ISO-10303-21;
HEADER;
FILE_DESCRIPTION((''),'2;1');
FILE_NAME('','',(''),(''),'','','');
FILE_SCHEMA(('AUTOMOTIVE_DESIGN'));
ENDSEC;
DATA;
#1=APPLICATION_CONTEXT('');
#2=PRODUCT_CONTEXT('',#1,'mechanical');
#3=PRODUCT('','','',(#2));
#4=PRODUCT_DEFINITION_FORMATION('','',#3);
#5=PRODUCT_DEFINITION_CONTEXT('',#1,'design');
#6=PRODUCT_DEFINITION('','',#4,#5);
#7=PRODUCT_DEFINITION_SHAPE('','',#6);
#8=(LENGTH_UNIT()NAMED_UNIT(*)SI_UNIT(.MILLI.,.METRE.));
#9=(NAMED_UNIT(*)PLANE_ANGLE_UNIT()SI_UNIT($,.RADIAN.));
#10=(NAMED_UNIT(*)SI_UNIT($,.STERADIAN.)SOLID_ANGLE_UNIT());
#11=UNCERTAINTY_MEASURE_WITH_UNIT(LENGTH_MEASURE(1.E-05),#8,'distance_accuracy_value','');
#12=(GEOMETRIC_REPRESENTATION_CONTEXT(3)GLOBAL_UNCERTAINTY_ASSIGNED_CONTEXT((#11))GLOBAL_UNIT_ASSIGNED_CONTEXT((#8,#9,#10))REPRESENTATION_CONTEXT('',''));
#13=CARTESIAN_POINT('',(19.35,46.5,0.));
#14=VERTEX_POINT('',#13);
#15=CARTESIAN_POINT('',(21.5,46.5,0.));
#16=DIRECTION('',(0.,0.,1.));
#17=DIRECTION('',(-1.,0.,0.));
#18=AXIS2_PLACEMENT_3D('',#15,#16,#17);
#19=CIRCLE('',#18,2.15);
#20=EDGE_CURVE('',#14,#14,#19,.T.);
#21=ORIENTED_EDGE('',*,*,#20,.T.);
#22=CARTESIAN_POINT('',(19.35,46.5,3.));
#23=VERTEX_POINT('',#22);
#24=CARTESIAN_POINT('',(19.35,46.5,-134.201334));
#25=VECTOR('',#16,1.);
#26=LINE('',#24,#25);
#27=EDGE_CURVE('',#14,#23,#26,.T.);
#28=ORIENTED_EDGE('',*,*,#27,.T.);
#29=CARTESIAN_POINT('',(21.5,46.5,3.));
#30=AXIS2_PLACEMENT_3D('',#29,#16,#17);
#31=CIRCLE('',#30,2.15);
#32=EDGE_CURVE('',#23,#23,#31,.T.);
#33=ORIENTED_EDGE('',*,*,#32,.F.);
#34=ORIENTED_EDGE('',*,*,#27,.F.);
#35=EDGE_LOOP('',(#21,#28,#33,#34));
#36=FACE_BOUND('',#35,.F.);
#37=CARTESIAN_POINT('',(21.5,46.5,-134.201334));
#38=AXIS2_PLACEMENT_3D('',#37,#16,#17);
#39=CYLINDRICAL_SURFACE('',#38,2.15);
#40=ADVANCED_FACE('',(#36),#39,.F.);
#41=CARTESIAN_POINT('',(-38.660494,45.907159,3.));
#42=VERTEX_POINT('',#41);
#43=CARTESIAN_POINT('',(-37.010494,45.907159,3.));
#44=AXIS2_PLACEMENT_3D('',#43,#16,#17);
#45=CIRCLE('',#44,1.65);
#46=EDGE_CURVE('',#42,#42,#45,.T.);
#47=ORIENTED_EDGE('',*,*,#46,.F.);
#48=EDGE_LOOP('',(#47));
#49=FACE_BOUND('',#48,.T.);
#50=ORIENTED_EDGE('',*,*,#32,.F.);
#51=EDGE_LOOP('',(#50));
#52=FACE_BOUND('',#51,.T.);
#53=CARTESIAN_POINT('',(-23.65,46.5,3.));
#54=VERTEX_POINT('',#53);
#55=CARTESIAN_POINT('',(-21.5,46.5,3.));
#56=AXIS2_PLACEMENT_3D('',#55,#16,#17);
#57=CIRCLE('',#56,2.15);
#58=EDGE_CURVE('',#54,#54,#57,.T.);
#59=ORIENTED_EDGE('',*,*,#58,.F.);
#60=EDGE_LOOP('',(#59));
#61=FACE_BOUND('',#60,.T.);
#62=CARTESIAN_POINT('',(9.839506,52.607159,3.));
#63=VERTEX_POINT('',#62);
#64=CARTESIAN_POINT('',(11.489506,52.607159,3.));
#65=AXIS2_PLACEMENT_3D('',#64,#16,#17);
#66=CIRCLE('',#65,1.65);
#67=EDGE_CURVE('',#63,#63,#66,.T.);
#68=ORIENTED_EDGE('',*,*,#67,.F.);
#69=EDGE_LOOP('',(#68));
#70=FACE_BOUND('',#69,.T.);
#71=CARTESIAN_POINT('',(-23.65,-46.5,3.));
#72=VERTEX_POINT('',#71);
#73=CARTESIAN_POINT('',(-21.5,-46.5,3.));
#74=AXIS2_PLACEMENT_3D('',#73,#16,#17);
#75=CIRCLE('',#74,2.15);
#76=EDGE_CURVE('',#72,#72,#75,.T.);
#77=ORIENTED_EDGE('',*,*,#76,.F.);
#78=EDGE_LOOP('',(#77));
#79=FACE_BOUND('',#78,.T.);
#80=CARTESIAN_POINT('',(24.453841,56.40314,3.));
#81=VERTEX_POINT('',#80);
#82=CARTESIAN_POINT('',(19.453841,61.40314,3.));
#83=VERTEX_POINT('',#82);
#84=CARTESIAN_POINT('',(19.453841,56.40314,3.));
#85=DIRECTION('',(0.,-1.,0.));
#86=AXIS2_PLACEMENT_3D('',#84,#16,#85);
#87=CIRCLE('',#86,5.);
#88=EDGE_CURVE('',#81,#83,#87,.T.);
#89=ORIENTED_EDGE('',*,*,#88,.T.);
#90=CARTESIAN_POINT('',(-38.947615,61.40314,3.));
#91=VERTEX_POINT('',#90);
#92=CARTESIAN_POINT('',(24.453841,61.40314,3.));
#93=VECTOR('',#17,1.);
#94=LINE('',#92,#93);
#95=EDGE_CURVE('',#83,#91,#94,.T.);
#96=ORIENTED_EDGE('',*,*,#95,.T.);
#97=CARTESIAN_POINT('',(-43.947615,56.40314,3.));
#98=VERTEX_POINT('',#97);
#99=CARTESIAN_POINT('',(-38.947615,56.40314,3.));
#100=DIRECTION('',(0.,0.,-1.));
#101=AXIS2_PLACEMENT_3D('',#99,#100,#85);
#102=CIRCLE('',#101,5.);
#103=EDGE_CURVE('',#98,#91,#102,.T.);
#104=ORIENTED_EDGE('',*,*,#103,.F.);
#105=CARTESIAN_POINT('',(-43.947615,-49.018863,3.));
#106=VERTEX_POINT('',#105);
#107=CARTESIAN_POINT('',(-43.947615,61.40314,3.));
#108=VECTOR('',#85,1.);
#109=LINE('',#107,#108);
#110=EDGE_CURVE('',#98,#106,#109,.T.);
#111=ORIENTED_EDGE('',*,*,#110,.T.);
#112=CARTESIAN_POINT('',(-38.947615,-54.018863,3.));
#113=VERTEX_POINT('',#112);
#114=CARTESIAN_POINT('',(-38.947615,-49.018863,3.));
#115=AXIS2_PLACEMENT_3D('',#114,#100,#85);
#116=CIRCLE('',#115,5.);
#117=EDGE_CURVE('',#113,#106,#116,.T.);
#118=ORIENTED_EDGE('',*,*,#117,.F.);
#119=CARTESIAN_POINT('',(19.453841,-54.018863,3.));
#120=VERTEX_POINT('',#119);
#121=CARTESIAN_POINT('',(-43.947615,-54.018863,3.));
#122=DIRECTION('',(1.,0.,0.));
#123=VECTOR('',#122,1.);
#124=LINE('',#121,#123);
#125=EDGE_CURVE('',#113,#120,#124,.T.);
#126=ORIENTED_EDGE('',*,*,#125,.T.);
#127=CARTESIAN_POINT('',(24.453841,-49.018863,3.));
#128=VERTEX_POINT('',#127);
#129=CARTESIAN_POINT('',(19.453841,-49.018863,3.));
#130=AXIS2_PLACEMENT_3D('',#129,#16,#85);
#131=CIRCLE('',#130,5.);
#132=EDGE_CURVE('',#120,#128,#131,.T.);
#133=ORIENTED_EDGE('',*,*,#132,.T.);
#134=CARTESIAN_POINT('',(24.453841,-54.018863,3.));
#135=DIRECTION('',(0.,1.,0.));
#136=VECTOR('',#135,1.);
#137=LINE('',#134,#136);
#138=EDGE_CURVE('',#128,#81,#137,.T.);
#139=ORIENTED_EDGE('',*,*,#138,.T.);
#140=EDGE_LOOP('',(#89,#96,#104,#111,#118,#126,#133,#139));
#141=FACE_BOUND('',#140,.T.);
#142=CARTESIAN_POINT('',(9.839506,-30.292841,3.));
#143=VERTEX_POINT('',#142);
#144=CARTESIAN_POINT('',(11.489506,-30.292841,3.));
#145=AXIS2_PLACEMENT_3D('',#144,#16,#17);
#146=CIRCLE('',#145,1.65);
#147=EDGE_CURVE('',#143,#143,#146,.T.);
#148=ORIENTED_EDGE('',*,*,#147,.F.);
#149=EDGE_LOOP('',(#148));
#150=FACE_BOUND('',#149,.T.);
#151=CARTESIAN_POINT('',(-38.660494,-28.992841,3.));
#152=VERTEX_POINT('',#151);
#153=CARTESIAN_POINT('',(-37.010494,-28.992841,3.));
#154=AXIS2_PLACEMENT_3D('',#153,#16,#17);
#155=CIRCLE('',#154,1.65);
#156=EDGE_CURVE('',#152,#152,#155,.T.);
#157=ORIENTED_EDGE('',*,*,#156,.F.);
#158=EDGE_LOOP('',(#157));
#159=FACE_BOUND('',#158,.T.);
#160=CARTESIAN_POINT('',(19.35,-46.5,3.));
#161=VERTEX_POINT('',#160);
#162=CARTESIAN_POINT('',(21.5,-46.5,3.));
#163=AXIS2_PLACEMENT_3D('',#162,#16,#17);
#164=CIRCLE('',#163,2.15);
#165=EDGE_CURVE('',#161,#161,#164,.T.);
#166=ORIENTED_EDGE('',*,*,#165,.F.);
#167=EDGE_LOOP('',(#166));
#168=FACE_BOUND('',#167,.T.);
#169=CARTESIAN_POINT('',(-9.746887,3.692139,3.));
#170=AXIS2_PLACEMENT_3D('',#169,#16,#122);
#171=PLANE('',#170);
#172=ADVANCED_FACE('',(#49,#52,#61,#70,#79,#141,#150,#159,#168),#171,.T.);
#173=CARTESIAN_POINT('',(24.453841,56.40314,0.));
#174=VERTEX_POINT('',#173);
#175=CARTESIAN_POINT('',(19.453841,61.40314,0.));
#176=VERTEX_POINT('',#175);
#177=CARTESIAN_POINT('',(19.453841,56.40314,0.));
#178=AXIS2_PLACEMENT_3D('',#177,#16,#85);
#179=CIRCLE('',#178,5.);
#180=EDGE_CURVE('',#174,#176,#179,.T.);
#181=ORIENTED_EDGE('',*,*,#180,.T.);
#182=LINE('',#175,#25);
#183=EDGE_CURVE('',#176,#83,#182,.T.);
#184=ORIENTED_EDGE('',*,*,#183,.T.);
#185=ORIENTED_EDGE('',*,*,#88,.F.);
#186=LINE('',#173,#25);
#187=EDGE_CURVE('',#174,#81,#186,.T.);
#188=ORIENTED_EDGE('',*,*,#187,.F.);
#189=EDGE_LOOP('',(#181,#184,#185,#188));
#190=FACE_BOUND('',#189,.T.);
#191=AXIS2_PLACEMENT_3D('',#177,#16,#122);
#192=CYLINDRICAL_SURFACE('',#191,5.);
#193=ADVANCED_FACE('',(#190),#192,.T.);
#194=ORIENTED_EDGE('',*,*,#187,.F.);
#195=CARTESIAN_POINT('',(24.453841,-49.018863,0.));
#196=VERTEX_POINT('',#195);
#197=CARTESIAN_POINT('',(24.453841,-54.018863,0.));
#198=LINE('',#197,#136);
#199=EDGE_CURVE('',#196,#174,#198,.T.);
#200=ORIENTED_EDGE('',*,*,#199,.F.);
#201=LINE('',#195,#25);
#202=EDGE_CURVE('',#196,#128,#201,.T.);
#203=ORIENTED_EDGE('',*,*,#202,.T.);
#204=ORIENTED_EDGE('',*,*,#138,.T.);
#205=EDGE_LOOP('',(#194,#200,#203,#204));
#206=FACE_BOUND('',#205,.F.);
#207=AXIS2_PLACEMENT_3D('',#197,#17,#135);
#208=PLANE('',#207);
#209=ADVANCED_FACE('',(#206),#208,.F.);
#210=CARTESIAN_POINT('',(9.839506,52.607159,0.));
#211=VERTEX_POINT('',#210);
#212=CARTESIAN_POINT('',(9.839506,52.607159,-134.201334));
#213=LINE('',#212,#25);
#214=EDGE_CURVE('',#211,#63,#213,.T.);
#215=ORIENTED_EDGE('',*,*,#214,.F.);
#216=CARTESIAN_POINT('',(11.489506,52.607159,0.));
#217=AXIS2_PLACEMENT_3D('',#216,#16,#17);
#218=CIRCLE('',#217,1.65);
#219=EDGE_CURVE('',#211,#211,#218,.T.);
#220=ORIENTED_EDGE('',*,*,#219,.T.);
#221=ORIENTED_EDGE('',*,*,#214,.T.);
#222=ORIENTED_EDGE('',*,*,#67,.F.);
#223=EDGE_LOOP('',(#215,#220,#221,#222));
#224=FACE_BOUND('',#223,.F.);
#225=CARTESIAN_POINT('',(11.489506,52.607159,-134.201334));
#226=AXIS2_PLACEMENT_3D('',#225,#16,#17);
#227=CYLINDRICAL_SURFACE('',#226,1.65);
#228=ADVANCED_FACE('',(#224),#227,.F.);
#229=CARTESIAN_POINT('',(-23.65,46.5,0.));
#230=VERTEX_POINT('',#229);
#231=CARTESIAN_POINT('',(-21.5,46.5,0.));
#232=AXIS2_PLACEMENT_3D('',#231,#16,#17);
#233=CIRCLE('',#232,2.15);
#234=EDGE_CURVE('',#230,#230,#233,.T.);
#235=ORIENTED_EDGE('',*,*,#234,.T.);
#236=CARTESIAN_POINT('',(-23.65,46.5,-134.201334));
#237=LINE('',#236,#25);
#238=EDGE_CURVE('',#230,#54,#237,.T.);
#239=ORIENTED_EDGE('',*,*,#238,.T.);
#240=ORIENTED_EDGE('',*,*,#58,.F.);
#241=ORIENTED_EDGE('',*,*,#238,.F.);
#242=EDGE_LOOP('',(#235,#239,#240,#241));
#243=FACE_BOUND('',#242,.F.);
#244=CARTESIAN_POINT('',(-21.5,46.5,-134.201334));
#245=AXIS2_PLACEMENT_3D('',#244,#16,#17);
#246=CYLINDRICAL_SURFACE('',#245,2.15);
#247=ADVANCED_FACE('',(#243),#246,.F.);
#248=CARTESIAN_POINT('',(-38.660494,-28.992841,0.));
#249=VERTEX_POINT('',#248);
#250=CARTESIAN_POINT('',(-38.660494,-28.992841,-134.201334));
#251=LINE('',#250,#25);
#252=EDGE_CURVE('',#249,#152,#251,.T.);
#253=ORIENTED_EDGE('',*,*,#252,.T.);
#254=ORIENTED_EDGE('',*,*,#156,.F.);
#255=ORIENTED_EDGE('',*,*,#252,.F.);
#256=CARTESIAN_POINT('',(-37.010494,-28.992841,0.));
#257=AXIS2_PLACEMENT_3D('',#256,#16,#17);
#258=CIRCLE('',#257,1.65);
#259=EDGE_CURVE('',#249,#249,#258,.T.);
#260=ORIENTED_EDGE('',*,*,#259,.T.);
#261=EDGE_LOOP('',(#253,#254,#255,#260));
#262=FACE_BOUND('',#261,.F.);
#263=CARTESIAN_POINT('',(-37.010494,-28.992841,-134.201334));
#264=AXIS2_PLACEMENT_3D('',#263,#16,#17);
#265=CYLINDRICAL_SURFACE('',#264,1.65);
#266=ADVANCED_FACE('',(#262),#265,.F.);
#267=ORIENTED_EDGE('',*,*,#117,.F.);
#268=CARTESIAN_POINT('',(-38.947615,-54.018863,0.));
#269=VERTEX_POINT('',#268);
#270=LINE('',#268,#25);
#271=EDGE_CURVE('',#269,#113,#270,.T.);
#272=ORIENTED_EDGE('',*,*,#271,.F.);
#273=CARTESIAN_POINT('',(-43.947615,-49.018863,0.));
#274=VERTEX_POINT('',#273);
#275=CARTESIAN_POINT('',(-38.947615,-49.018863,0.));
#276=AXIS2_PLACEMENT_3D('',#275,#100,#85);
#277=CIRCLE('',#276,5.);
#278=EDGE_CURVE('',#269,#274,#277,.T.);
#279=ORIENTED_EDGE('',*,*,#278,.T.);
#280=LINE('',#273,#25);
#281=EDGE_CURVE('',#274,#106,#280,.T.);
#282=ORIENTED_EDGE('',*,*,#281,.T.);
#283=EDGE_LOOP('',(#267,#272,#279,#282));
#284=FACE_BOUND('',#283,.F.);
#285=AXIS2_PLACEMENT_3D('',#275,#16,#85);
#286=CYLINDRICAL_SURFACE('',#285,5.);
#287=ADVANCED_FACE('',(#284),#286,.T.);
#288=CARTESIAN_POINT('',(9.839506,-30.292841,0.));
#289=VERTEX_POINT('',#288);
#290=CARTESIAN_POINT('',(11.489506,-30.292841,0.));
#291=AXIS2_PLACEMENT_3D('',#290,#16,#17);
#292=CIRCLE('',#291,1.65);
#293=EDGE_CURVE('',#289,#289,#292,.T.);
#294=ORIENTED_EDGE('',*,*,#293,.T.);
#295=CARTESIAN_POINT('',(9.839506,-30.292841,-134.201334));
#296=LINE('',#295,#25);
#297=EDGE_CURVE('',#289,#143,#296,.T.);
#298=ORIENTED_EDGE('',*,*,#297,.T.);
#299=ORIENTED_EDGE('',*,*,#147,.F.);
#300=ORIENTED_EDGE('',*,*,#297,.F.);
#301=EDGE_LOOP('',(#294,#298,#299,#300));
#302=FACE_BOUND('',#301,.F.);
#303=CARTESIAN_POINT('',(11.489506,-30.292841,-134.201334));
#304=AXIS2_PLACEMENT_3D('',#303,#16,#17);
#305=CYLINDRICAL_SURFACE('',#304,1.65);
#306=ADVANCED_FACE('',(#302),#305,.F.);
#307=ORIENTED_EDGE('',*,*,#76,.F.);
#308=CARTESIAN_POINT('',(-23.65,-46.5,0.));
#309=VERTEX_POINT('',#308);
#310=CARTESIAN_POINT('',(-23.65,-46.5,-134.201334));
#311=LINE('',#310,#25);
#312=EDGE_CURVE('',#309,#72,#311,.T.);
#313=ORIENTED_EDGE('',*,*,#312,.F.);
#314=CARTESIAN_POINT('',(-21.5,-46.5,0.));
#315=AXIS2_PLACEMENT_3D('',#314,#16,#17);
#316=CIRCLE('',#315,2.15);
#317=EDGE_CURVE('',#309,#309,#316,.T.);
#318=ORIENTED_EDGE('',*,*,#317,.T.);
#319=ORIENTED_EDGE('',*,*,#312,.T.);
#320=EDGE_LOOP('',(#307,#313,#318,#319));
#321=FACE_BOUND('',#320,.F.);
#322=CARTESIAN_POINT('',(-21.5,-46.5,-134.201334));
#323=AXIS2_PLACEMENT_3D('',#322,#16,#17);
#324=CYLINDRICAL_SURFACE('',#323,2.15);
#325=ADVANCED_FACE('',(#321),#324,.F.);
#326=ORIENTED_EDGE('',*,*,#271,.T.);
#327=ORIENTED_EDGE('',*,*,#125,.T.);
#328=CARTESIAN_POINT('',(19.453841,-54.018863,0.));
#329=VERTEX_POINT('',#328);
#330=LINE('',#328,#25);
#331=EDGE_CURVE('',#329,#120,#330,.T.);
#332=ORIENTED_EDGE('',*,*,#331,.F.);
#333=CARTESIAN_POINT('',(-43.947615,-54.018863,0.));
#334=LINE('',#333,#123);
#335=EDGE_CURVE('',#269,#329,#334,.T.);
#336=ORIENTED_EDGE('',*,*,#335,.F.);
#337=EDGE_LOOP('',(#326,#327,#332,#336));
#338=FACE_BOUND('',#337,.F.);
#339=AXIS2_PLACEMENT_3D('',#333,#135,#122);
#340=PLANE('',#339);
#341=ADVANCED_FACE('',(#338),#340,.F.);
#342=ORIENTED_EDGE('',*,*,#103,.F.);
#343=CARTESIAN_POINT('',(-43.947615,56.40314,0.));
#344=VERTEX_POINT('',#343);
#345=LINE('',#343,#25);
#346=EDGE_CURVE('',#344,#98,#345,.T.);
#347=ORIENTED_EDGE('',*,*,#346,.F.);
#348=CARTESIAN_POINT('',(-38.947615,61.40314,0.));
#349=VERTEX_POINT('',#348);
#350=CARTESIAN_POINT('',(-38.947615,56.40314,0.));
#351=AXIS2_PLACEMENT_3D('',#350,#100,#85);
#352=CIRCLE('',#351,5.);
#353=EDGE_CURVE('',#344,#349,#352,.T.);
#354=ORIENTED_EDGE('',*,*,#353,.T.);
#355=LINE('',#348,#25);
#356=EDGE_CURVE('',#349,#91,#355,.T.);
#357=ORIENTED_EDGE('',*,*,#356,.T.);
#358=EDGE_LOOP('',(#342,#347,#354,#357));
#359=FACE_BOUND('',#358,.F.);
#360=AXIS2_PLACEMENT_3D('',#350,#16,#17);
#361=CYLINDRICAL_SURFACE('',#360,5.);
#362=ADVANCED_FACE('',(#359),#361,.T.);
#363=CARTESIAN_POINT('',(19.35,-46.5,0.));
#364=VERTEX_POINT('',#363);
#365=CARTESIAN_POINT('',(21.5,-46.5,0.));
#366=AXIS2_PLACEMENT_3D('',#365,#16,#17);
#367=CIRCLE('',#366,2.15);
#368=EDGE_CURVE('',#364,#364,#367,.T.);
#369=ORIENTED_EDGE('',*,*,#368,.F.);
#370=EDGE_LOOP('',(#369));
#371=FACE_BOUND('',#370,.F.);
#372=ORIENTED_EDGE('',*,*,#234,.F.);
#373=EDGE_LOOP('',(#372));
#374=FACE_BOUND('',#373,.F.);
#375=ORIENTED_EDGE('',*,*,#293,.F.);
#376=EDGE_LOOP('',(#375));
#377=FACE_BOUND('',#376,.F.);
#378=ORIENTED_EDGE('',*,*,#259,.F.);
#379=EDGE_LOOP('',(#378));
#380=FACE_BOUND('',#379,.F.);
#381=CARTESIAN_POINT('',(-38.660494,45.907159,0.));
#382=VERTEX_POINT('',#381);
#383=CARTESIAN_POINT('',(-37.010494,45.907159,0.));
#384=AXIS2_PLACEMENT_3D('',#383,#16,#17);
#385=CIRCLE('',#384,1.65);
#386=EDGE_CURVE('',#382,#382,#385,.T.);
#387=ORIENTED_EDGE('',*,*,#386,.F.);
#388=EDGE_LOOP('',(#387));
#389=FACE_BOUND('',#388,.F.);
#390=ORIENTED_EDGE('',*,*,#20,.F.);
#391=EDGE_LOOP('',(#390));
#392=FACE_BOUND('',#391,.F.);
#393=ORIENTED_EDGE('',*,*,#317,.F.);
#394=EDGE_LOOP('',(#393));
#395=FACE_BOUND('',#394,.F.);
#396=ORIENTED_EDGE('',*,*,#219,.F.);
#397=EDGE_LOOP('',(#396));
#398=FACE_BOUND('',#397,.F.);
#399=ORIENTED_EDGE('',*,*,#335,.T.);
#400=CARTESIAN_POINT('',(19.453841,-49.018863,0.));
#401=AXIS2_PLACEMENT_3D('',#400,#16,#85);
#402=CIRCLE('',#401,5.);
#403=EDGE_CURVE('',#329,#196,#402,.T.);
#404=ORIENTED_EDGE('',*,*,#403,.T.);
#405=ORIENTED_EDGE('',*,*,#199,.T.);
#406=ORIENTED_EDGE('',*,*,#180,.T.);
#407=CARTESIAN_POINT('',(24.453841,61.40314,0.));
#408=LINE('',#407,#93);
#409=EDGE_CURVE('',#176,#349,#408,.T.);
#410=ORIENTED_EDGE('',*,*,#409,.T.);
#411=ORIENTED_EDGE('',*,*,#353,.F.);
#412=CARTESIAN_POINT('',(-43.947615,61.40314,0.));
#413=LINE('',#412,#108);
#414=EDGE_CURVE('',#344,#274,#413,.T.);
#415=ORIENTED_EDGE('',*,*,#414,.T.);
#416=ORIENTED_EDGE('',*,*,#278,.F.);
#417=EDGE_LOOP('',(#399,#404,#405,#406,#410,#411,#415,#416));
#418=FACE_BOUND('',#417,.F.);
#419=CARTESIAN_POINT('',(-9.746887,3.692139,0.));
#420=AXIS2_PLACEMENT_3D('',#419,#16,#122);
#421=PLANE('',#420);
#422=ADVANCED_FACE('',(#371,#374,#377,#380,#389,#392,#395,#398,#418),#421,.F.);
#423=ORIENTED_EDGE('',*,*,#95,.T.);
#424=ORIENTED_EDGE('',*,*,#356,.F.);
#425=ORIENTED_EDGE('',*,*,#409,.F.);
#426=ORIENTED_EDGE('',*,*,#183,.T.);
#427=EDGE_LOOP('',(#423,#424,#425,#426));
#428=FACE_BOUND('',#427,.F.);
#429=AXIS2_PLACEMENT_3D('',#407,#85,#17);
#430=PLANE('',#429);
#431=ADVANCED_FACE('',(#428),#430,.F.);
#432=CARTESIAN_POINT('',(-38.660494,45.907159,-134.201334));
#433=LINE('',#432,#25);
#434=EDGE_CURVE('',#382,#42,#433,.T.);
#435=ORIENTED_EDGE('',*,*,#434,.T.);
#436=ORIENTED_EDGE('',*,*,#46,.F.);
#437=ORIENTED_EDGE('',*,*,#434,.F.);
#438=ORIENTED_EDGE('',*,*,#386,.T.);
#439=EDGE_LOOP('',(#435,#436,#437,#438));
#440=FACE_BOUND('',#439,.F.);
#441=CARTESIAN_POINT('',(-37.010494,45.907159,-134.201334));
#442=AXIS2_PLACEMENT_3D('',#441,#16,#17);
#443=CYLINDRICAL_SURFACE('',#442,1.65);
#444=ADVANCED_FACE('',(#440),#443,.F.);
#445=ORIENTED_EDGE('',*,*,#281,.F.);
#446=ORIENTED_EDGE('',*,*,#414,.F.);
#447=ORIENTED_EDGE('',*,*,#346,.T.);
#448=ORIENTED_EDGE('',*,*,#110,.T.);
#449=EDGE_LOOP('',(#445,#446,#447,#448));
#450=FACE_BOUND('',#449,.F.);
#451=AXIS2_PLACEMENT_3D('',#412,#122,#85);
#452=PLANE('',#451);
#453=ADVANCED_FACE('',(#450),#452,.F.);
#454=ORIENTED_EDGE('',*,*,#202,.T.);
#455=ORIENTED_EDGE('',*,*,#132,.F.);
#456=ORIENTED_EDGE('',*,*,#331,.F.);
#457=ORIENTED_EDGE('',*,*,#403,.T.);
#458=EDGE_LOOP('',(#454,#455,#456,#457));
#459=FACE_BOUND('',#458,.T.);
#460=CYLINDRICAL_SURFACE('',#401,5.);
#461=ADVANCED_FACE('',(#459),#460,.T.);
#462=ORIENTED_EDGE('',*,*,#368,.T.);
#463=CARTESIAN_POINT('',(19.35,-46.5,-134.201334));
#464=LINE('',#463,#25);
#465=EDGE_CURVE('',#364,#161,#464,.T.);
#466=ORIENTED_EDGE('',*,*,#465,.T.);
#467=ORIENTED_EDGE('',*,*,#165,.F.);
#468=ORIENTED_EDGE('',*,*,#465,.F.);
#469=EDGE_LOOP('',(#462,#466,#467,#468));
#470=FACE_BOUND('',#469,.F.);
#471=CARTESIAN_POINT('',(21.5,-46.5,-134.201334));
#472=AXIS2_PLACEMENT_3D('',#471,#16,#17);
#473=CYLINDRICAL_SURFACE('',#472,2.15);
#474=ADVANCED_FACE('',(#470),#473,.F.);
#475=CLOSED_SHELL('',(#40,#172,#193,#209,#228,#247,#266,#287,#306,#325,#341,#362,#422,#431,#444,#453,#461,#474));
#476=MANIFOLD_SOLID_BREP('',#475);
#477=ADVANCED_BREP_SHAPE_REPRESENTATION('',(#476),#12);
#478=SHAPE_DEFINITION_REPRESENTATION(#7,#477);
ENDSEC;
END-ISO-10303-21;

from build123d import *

# Parameters (mm, degrees)
F1_DEPTH = 3
F2_D     = 3.3
F3_D     = 4.3
F4_R     = 5


# Not quite as in the source:
# - a feature names something its author has since deleted; it is built from what else it names


with BuildPart() as f1:
    # F0 (on Top) → F1 (new body)
    with BuildSketch(Plane.XY):
        Polygon((-43.9476147294, -54.0188625455), (24.4538411498, -54.0188625455), (24.4538411498, 61.4031404257), (-43.9476147294, 61.4031404257), (-43.9476147294, 45.1967306435), align=None)
    extrude(amount=F1_DEPTH)

    # F2 (through all)
    with Locations(Plane(origin=(0, 0, 0), x_dir=(1, 0, 0), z_dir=(0, 0, -1))):
        with Locations((-37.0104938323, -45.9071589798), (11.4895061677, -52.6071589798), (11.4895061677, 30.2928410202), (-37.0104938323, 28.9928410202)):
            Hole(F2_D / 2)

    # F3 (through all)
    with Locations(Plane(origin=(0, 0, 0), x_dir=(1, 0, 0), z_dir=(0, 0, -1))):
        with Locations((-21.5, -46.5), (21.5, -46.5), (21.5, 46.5), (-21.5, 46.5)):
            Hole(F3_D / 2)

    # F4
    f4_edges = [f1.edges().sort_by_distance(p)[0] for p in [
        (-43.947615, -54.018863, 1.5),
        (24.453841, -54.018863, 1.5),
        (-43.947615, 61.40314, 1.5),
        (24.453841, 61.40314, 1.5),
    ]]
    fillet(f4_edges, radius=F4_R)


solid = f1.part
